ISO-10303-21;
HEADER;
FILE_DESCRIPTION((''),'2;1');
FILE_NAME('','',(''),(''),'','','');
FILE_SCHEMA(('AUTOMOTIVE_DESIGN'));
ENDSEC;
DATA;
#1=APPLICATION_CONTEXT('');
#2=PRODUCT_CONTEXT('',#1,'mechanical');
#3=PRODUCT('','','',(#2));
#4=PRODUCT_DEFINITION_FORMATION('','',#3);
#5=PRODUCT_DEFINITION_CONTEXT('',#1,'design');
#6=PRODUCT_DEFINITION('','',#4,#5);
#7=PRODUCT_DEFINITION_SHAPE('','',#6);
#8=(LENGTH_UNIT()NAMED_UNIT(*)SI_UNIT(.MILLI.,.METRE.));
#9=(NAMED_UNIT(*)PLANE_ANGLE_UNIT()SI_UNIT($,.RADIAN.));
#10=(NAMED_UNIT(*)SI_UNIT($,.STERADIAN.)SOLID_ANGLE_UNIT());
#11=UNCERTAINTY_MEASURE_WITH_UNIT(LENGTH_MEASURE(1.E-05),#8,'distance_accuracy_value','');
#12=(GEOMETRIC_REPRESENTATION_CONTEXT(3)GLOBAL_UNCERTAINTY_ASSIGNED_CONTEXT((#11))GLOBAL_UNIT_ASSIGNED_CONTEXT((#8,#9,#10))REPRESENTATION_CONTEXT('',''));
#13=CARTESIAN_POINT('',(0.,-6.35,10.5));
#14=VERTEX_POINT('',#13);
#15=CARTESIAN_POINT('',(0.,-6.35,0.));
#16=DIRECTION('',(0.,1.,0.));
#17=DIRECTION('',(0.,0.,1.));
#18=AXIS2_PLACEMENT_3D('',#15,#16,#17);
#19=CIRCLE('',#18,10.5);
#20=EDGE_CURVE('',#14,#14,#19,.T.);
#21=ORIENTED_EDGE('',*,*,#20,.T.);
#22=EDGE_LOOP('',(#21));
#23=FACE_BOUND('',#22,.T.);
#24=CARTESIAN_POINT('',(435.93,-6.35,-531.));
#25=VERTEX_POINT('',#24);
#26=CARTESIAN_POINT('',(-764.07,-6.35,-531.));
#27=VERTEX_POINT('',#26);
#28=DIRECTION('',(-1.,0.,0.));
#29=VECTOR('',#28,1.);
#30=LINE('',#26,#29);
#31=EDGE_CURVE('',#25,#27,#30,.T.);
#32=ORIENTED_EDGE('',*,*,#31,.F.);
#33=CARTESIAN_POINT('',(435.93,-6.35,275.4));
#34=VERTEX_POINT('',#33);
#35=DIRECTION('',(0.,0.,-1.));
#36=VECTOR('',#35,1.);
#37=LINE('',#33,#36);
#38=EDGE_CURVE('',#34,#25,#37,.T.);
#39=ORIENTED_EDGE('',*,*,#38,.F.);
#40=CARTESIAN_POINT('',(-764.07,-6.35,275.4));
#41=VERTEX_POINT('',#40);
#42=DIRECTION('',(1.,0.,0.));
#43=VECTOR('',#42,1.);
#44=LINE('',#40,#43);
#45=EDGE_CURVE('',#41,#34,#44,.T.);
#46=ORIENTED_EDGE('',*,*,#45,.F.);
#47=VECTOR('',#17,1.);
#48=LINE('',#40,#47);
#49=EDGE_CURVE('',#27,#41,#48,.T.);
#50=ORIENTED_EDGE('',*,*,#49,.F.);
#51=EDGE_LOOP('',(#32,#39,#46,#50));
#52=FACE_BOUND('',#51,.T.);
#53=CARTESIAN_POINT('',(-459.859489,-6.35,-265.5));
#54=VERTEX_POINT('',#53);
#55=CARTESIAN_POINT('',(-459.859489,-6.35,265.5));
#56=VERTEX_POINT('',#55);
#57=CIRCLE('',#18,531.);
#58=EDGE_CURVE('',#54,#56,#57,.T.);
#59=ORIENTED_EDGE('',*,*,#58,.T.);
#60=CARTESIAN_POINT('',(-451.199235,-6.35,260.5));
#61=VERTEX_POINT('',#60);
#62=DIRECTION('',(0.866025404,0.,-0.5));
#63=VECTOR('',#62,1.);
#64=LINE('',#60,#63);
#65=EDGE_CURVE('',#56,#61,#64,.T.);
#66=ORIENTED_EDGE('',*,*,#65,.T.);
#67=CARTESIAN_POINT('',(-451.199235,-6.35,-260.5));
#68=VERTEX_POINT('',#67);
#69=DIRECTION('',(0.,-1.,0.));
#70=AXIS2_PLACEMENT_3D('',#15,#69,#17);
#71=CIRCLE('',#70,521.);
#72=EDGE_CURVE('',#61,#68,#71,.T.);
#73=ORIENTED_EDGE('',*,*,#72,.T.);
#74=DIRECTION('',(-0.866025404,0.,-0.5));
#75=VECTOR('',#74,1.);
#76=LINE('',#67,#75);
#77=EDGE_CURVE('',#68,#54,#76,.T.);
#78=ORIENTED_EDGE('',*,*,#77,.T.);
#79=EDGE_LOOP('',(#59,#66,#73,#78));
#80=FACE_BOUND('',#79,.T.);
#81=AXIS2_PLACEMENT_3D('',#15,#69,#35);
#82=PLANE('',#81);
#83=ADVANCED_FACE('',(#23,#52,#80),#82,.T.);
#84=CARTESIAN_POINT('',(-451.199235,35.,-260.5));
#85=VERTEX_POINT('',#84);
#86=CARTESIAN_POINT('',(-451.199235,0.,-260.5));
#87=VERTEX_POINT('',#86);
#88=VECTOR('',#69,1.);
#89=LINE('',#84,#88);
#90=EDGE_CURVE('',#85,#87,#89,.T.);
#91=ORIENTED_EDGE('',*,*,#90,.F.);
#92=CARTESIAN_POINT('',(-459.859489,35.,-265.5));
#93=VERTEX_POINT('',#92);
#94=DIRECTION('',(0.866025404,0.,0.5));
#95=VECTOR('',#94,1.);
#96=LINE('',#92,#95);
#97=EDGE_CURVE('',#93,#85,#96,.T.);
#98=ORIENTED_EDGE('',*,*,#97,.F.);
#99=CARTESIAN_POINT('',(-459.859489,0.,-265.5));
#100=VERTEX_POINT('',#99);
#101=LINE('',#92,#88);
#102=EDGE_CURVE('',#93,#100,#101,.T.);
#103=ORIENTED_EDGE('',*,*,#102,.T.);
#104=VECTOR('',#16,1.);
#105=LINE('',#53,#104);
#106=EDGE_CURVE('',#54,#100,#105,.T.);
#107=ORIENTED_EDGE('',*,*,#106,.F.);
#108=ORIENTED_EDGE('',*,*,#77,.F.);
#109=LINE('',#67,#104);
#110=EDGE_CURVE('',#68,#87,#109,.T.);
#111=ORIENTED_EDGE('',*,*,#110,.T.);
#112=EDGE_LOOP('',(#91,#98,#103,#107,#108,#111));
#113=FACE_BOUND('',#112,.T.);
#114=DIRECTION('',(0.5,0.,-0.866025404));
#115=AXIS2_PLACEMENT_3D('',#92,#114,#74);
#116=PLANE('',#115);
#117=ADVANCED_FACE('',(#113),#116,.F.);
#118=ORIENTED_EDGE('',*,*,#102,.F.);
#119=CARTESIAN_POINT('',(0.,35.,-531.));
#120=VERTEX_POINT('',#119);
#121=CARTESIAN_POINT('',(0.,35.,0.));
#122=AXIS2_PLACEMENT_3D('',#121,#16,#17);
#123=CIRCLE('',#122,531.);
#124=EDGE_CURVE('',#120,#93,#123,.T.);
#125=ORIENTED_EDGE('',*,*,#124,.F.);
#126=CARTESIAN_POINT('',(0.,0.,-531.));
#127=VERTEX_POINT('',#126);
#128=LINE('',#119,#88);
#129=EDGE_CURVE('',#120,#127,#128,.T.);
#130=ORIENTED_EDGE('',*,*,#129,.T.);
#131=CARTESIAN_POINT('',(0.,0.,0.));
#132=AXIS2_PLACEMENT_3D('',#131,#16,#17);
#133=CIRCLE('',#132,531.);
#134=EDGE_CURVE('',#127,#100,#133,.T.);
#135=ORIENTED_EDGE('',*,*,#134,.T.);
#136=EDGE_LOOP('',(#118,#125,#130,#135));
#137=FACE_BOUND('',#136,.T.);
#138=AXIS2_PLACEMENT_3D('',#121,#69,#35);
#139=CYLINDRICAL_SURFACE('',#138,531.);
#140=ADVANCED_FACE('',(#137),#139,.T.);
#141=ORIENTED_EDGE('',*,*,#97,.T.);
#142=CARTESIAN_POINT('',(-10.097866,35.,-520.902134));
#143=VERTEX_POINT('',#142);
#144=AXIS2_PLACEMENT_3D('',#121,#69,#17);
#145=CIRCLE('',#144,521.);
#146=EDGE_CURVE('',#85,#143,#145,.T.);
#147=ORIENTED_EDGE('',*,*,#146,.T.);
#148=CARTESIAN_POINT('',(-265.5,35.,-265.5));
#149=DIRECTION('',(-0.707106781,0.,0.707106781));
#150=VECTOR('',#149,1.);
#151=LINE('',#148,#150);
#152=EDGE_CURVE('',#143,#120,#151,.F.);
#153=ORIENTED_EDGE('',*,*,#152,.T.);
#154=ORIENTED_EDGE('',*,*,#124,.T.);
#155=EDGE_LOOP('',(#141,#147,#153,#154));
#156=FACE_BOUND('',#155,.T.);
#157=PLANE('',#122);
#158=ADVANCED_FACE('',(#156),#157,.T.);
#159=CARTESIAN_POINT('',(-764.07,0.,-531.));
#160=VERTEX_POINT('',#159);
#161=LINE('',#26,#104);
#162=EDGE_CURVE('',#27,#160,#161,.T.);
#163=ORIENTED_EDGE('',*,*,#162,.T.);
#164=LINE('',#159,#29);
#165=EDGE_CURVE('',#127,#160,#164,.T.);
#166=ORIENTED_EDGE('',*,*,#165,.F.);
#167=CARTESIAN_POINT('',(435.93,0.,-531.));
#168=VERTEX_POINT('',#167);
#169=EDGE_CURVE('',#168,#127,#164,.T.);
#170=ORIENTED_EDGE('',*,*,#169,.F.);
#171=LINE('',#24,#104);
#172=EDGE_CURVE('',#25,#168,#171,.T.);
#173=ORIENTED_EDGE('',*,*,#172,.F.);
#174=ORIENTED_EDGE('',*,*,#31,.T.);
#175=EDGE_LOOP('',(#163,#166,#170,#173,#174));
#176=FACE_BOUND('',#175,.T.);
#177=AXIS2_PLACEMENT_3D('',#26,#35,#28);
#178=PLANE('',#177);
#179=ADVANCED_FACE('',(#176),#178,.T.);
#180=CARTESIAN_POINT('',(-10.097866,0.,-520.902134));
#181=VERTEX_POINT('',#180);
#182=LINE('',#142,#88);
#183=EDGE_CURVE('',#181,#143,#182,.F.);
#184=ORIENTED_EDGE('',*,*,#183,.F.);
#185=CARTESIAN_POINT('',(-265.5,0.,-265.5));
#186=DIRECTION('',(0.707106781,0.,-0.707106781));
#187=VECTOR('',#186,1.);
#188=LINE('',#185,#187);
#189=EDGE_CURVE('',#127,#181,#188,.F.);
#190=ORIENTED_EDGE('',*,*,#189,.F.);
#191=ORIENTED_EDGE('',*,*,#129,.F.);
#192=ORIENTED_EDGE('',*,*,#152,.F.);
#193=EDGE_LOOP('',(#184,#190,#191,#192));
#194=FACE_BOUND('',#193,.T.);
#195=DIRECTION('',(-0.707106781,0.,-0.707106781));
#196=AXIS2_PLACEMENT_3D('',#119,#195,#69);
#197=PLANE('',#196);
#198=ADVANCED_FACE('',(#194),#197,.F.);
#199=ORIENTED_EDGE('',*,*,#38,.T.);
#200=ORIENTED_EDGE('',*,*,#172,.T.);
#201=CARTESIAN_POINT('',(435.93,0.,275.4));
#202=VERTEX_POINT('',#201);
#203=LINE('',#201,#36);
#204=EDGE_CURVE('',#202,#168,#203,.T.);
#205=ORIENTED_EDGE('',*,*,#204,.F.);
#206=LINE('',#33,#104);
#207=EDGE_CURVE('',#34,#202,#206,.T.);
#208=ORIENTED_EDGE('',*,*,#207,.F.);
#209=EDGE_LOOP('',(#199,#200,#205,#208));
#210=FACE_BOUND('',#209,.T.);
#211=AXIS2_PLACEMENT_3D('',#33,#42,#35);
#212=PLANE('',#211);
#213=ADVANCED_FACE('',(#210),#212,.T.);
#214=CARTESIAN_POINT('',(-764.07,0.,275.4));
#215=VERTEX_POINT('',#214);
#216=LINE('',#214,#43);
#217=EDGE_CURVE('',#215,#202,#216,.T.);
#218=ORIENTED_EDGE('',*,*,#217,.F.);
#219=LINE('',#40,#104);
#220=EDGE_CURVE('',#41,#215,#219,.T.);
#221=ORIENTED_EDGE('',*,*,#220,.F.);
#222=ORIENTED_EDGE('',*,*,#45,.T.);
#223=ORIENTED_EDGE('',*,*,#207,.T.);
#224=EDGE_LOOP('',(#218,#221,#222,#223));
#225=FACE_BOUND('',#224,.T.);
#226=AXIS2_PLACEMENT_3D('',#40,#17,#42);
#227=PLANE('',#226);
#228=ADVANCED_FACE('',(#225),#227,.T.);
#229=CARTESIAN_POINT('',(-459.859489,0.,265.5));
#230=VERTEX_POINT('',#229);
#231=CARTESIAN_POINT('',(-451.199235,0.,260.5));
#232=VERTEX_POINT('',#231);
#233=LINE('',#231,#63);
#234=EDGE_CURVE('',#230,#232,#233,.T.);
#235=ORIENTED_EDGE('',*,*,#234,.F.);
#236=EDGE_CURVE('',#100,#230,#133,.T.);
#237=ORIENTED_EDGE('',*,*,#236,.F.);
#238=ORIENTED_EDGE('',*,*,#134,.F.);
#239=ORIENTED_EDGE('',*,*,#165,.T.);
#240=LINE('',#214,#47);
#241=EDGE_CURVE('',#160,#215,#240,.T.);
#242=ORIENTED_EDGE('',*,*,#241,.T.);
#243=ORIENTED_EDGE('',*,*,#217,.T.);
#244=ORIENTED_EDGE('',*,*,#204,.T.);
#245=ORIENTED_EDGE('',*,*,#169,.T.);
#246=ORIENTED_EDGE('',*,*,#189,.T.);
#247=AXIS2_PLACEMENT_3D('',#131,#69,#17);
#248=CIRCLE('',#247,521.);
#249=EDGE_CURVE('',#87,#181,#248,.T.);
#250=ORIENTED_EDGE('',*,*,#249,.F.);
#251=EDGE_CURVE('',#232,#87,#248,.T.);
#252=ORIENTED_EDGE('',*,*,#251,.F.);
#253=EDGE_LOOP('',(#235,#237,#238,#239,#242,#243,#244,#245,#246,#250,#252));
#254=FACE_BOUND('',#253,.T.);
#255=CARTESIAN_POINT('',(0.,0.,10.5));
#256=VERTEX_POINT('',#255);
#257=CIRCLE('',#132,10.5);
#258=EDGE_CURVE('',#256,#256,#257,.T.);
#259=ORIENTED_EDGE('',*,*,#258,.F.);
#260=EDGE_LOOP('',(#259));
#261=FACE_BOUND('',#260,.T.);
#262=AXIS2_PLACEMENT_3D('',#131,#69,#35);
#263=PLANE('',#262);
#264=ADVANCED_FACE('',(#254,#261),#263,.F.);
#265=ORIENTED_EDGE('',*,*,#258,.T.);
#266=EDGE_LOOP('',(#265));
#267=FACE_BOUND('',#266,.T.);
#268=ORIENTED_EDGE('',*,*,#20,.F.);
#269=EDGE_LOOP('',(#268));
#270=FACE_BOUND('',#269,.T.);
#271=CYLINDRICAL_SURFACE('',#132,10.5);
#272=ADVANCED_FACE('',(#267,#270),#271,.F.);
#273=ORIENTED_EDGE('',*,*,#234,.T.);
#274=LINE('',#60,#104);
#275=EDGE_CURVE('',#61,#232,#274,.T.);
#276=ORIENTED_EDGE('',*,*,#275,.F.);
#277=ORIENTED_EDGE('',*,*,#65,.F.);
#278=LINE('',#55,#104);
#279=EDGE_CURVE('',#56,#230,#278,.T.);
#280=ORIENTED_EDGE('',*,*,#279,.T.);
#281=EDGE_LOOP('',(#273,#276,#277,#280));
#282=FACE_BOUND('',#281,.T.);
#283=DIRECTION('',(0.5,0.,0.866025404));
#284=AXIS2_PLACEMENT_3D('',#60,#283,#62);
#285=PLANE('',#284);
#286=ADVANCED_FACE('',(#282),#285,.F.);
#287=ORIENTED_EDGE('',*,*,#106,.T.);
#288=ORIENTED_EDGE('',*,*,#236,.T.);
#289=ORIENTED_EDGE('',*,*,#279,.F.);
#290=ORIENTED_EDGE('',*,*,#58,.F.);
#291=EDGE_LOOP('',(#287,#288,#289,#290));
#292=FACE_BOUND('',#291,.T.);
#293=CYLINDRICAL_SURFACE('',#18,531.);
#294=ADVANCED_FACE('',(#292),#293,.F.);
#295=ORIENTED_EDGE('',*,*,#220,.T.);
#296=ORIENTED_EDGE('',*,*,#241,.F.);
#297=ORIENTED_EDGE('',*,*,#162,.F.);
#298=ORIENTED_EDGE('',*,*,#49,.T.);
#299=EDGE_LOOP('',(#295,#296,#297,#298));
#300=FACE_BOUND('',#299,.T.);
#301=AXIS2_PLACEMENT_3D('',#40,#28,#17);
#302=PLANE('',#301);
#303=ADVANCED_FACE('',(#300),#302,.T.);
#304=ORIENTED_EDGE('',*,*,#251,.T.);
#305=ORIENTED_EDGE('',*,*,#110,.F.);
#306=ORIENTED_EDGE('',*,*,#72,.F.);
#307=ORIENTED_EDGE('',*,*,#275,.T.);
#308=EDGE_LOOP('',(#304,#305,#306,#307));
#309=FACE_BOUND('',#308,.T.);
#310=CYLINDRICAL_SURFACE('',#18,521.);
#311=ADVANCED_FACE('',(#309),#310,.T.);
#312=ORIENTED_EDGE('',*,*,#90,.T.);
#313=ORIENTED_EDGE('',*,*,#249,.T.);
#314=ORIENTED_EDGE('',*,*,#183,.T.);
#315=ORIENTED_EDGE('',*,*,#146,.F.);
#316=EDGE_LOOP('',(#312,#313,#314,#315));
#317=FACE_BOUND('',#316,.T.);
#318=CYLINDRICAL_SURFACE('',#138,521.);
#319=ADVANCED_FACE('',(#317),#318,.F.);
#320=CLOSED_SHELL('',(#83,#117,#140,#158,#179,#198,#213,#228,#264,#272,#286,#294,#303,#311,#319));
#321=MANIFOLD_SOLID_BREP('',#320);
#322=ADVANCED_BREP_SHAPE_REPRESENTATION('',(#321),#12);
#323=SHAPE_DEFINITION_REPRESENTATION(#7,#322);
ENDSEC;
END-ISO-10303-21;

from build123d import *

# Parameters (mm, degrees)
BOSS_EXTRUDE1_DEPTH    = 35
SKETCH4_W              = 1200
SKETCH4_H              = 806.4
BOSS_EXTRUDE2_DEPTH    = 6.35
CHAMFER1_SIZE          = 10
F_20_0MM_DOWEL_HOLE1_D = 21
CUT_EXTRUDE1_DEPTH     = 932.12242208


with BuildPart() as part:
    # Sketch3 → Boss-Extrude1 (new body)
    with BuildSketch(Plane(origin=(0, 0, 0), x_dir=(1, 0, 0), z_dir=(0, 1, 0))):
        with BuildLine():
            Line((0, 531), (0, 521))
            ThreePointArc((0, 521), (-260.5, 451.199235372), (-451.199235372, 260.5))
            Line((-451.199235372, 260.5), (-459.85948941, 265.5))
            ThreePointArc((-459.85948941, 265.5), (-265.5, 459.85948941), (0, 531))
        make_face()
    extrude(amount=BOSS_EXTRUDE1_DEPTH)

    # Sketch4 → Boss-Extrude2 (add)
    with BuildSketch(Plane(origin=(0, 0, 0), x_dir=(1, 0, 0), z_dir=(0, 1, 0))):
        with Locations((-164.07, 127.8)):
            Rectangle(SKETCH4_W, SKETCH4_H)
    extrude(amount=-BOSS_EXTRUDE2_DEPTH)

    # Chamfer1
    # the kernel refuses this chamfer: 10 mm, written as the material it takes off along each edge
    with BuildSketch(Plane(origin=(0, 0, -521), x_dir=(-0.999953038196086, 0, 0.009691305506332204), z_dir=(0, 1, 0))) as chamfer1_piece_1:
        with BuildLine():
            Line((10.098340338, 0), (-CHAMFER1_SIZE * 0.00969130550632, -CHAMFER1_SIZE * 0.999953038196))
            Line((-CHAMFER1_SIZE * 0.00969130550632, -CHAMFER1_SIZE * 0.999953038196), (0, 0))
            ThreePointArc((0, 0), (5.192000536, -0.024447522), (10.098340338, 0))
        make_face()
    extrude(amount=60.969219121, mode=Mode.SUBTRACT)

    # Ø20.0mm Dowel Hole1 (through all)
    with Locations(Plane(origin=(0, 0, 0), x_dir=(1, 0, 0), z_dir=(0, 1, 0))):
        with Locations((0, 0)):
            Hole(F_20_0MM_DOWEL_HOLE1_D / 2)

    # Sketch8 → Cut-Extrude1 (cut, through all)
    with BuildSketch(Plane(origin=(0, 0, 0), x_dir=(1, 0, 0), z_dir=(0, 1, 0))):
        with BuildLine():
            Line((-451.199235372, 260.5), (-459.85948941, 265.5))
            ThreePointArc((-459.85948941, 265.5), (-531, 0), (-459.85948941, -265.5))
            Line((-459.85948941, -265.5), (-451.199235372, -260.5))
            ThreePointArc((-451.199235372, -260.5), (-521, 0), (-451.199235372, 260.5))
        make_face()
    extrude(amount=-CUT_EXTRUDE1_DEPTH, mode=Mode.SUBTRACT)


solid = part.part
